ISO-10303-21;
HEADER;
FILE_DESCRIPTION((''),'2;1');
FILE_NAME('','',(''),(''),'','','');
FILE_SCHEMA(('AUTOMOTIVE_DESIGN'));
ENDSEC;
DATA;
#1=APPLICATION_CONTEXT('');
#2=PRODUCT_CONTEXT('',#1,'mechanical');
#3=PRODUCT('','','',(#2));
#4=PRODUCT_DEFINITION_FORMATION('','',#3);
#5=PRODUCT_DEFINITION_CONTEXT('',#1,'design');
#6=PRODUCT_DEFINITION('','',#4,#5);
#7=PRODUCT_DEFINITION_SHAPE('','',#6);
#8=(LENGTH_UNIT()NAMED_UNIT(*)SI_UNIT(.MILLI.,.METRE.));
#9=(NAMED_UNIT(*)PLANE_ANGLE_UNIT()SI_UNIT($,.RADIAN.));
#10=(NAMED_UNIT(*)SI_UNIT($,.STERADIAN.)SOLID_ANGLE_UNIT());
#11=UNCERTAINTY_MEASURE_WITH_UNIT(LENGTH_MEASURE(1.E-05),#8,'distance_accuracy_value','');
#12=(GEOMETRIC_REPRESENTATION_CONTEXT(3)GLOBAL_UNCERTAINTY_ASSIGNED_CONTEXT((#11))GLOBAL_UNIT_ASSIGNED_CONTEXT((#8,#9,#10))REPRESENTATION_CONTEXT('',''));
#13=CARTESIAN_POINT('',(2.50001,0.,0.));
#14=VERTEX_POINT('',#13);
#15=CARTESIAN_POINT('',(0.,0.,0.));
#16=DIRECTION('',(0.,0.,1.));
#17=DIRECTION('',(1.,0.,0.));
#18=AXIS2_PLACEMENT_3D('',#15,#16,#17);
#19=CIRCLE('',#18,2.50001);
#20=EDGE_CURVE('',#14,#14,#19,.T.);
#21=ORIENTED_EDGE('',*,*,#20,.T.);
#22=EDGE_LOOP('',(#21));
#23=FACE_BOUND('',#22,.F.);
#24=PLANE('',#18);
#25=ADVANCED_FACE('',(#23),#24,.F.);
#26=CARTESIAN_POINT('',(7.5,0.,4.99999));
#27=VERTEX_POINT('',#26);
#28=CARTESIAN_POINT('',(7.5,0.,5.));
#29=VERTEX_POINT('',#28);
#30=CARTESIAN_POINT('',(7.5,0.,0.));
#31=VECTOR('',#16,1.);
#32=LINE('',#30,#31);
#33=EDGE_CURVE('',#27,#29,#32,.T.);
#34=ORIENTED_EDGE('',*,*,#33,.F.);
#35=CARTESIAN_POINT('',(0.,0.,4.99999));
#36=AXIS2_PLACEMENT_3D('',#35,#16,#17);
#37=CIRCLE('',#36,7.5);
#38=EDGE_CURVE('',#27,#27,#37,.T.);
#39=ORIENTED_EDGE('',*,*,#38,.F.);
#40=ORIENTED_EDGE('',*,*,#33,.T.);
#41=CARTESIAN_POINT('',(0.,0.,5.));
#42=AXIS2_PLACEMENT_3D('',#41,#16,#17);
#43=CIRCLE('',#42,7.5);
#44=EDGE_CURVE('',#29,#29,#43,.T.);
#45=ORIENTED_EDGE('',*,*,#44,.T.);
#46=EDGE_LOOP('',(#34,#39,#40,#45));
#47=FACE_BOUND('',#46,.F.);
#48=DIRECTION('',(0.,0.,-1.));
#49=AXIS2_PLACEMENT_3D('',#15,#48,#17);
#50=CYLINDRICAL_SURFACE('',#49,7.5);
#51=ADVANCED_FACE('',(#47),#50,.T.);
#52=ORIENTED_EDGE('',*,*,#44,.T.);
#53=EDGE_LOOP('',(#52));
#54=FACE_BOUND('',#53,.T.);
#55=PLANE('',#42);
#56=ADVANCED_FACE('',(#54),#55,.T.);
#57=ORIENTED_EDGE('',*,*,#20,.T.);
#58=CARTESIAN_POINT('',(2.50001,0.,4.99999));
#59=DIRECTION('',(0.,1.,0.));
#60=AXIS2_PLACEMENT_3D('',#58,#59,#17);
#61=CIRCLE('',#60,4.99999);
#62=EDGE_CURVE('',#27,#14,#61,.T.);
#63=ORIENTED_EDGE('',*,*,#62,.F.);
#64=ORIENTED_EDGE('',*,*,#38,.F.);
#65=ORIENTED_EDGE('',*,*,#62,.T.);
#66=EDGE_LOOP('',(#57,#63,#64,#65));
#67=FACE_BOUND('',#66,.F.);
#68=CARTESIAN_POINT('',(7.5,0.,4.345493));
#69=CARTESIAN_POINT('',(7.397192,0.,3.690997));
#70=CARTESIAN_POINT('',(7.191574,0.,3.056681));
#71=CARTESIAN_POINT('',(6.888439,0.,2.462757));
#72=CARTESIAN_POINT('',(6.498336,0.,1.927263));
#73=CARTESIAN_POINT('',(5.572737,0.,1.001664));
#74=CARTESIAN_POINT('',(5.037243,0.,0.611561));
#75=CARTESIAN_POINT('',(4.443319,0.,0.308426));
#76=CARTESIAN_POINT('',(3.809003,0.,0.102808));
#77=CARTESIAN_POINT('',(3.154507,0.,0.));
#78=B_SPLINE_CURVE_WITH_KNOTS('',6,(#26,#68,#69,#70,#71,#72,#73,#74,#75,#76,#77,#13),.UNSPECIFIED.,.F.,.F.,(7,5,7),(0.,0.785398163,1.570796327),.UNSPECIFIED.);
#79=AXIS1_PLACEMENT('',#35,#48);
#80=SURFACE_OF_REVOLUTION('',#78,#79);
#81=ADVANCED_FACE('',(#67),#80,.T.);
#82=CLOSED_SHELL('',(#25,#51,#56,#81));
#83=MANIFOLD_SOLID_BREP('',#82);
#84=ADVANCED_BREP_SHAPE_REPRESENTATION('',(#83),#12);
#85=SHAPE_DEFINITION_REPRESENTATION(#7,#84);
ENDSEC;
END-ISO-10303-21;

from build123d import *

# Parameters (mm, degrees)
F0_R     = 5
F1_DEPTH = 5
F0_R_2   = 7.5
F2_DEPTH = 5
F3_R     = 4.99999


# Not quite as in the source:
# - a fillet or chamfer is up to 0.001 mm smaller than in the source, because OpenCascade refuses the exact size


with BuildPart() as f1:
    # F0 (on Top) → F1 (new body)
    with BuildSketch(Plane.XY):
        Circle(F0_R)
    extrude(amount=F1_DEPTH)

    # F0 (on Top) → F2 (join)
    with BuildSketch(Plane.XY):
        Circle(F0_R_2)
        Circle(F0_R, mode=Mode.SUBTRACT)
    extrude(amount=F2_DEPTH)

    # F3 (radius 5 in the source; OpenCascade refuses exactly that, so slightly less here)
    f3_edges = [f1.edges().sort_by_distance(p)[0] for p in [
        (-7.5, 0, 0),
    ]]
    fillet(f3_edges, radius=F3_R)


solid = f1.part
